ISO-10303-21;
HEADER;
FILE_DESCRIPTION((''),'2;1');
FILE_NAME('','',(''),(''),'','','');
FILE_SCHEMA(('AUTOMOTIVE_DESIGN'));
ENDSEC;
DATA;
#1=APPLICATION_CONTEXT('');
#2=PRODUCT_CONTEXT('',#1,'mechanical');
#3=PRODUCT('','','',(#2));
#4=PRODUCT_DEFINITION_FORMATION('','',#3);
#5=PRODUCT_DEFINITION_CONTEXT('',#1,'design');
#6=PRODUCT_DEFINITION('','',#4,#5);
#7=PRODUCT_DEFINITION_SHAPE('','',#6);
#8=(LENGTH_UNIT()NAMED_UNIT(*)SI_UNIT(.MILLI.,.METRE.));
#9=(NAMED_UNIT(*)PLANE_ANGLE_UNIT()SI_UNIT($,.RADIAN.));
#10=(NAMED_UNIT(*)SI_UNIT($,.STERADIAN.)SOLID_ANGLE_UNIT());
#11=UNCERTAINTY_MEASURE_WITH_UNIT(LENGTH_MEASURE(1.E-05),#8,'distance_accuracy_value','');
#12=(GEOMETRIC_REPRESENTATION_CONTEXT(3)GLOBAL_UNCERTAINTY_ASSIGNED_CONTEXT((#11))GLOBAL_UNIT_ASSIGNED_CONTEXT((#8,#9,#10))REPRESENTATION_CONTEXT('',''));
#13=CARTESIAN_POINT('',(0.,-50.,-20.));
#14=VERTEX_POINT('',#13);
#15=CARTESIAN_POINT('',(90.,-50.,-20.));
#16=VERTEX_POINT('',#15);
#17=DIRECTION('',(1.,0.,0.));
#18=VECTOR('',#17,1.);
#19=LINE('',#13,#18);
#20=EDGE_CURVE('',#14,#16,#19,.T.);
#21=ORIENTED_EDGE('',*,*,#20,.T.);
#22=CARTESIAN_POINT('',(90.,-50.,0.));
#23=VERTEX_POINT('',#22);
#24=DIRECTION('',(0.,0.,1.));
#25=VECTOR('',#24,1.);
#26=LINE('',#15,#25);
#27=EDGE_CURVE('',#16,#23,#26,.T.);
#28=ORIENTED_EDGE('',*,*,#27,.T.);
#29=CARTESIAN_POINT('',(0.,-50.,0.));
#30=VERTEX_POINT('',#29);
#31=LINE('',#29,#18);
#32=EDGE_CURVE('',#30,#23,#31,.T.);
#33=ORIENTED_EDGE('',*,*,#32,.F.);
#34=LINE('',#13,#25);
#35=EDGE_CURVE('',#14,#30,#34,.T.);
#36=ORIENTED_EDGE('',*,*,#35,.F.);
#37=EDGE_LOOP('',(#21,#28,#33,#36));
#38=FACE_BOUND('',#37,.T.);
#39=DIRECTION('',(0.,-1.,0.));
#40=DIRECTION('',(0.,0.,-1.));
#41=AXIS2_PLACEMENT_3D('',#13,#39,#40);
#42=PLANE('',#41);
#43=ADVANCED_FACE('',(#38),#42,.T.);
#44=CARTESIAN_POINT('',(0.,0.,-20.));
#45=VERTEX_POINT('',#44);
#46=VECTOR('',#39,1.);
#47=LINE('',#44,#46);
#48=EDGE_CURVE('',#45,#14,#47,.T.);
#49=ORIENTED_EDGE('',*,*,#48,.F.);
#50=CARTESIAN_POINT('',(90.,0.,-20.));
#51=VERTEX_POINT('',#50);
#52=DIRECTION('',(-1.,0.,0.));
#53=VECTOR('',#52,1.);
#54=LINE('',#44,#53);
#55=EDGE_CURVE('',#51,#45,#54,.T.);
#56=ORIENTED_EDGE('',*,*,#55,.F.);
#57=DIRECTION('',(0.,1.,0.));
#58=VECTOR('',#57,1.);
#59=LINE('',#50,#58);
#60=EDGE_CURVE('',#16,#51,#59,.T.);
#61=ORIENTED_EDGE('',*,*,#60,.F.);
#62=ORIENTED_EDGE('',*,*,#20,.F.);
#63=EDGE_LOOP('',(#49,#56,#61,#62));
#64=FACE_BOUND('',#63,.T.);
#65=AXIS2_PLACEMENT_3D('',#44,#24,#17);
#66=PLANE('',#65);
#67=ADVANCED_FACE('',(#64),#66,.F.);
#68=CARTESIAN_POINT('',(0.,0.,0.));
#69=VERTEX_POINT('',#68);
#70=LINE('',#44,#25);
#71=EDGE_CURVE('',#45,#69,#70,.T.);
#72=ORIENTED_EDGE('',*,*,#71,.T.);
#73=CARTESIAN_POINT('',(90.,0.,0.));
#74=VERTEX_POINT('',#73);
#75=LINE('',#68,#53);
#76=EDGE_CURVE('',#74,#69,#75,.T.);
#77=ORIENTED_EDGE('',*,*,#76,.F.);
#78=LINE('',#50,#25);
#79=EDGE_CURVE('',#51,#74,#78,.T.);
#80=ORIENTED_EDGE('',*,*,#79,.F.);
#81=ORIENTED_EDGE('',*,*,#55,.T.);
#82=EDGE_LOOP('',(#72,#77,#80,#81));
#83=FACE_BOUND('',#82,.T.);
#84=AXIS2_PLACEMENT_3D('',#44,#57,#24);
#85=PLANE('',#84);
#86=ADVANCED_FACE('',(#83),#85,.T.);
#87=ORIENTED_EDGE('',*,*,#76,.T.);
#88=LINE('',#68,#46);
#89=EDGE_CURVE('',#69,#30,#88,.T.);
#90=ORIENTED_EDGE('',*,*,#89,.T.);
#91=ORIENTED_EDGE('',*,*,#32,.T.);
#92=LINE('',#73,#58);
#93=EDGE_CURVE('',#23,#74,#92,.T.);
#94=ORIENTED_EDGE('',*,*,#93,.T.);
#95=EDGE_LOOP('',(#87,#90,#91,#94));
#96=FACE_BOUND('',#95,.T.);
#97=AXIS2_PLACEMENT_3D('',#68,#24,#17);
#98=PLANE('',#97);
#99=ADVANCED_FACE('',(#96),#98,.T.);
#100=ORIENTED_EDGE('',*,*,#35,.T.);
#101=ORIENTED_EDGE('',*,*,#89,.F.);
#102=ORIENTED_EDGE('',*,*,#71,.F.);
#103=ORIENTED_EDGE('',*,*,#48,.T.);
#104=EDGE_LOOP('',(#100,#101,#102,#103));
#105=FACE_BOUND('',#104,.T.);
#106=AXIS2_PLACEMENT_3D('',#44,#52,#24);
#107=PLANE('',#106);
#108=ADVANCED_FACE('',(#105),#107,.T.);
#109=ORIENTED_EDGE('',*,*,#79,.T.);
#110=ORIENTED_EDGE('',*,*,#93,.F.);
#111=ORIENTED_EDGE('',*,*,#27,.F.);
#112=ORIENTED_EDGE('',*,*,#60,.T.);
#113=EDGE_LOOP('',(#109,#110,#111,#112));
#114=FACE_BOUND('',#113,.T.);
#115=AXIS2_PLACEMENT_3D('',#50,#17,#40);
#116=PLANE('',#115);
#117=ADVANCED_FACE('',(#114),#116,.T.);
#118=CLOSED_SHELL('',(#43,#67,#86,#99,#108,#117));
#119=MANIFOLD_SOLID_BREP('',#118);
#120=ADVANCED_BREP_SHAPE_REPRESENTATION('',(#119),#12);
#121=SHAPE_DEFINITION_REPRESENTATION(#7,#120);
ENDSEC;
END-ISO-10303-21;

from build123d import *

# Parameters (mm, degrees)
IZIM1_W            = 90
IZIM1_H            = 50
TABAN_FLAN_1_DEPTH = 20


# Sheet-metal steps are written as plain solids
with BuildPart() as part:
    # Çizim1 → Taban-Flanş1 (new body)
    with BuildSketch(Plane.XY):
        with Locations((45, -25)):
            Rectangle(IZIM1_W, IZIM1_H)
    extrude(amount=-TABAN_FLAN_1_DEPTH)


solid = part.part
